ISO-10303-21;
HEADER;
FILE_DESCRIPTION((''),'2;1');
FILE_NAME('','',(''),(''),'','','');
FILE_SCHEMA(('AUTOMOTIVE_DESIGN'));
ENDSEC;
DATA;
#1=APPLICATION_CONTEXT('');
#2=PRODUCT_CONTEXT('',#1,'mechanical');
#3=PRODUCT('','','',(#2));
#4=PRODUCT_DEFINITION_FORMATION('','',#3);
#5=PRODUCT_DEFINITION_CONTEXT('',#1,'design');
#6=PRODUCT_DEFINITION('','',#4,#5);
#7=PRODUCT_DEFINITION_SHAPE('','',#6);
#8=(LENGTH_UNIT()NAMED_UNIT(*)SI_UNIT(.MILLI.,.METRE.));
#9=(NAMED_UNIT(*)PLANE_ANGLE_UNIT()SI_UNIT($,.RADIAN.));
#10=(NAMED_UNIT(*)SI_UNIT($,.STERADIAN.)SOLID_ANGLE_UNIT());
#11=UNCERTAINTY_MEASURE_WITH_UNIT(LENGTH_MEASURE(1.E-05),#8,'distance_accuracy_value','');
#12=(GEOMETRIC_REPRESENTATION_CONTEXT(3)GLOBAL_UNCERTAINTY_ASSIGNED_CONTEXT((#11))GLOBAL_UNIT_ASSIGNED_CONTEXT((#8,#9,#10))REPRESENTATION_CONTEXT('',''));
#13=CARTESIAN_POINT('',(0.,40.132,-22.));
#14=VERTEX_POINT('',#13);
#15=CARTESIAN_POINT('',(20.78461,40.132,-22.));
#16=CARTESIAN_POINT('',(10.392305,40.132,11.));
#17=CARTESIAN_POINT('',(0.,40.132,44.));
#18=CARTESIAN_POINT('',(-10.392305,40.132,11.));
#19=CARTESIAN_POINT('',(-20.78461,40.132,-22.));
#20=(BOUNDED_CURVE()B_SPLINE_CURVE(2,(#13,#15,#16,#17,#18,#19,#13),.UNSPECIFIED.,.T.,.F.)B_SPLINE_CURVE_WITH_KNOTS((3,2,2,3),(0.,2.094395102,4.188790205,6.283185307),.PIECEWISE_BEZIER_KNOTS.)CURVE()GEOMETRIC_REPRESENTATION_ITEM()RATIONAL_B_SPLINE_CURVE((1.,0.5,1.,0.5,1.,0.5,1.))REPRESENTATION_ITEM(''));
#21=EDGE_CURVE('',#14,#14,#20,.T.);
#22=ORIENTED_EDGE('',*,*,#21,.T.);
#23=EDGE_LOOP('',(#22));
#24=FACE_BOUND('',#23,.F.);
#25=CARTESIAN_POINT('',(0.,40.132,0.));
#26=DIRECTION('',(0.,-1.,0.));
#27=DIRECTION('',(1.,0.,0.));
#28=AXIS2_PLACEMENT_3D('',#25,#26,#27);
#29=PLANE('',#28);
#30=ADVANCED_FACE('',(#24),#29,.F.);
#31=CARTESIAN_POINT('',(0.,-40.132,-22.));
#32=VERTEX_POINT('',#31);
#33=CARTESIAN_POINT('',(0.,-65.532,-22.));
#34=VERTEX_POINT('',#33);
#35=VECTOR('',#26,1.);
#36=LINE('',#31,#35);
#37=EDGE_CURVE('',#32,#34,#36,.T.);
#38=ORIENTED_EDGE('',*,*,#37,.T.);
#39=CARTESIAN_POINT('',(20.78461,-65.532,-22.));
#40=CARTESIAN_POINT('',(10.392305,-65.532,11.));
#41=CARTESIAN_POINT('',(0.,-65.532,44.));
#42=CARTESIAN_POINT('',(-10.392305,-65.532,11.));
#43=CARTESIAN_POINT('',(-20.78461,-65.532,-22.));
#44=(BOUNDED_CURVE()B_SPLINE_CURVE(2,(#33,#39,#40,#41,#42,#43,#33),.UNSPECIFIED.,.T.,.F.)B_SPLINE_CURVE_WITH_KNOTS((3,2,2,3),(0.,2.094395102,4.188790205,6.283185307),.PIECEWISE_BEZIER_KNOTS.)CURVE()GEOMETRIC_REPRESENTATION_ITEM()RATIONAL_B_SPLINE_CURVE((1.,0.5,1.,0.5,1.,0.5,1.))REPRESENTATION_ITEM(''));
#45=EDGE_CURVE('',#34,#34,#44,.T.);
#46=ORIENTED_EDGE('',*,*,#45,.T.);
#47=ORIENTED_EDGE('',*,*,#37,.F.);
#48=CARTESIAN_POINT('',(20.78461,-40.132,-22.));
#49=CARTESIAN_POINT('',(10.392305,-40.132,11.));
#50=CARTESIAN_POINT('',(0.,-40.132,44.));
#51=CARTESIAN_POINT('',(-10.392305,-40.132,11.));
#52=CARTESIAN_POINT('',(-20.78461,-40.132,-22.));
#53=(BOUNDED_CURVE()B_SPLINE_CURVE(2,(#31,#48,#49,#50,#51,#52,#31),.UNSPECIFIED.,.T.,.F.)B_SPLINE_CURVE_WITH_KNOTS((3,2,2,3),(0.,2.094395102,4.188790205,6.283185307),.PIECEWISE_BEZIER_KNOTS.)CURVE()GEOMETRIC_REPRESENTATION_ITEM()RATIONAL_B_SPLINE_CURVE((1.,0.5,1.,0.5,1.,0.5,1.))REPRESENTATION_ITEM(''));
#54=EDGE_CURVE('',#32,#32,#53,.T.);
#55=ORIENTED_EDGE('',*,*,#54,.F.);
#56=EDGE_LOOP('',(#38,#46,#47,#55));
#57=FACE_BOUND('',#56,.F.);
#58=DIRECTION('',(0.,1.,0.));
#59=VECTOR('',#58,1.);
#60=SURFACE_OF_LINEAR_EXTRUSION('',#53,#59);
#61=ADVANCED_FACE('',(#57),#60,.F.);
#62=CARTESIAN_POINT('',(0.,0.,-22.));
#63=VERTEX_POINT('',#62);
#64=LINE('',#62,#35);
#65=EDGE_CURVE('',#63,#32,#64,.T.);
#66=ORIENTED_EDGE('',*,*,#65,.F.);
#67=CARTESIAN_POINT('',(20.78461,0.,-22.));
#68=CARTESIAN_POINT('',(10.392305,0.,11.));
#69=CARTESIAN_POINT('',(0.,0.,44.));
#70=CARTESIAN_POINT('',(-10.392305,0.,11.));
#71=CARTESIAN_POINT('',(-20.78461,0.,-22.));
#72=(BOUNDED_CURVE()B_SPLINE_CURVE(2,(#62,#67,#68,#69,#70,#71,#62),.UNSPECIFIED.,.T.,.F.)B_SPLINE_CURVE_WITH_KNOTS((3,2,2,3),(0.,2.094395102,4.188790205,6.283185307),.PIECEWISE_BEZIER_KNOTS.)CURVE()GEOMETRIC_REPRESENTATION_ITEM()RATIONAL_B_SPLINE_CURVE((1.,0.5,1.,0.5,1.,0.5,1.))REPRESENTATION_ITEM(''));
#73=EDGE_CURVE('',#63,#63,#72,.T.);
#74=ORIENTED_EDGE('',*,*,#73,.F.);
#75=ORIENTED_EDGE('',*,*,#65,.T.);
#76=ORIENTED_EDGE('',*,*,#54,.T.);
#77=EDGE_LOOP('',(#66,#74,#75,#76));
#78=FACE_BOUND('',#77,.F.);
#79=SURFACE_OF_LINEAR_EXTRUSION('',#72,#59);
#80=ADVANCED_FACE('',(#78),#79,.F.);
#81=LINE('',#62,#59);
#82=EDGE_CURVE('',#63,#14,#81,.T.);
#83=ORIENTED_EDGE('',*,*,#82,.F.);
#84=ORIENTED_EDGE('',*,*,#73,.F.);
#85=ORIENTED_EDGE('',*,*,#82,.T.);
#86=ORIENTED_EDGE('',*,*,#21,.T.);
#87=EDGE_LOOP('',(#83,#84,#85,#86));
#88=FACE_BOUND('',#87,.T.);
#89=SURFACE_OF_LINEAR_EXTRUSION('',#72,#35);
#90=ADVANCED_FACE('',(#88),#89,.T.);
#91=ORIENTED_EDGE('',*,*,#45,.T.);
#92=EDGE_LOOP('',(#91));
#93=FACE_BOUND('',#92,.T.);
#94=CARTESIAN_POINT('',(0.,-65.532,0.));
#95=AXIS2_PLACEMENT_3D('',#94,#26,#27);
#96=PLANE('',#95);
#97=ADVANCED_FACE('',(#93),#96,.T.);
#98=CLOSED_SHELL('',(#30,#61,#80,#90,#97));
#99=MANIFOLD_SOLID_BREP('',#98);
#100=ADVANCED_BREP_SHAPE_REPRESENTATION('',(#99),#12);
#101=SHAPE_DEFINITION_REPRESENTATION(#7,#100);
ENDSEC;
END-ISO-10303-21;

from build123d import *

# Parameters (mm, degrees)
F1_DEPTH = 40.132
F4_DEPTH = 25.4


# Not quite as in the source:
# - the program builds the solid bodies; features that only make, move or delete a surface that nothing else refers to are left out


with BuildPart() as f1:
    # F0 (on Front) → F1 (new body, symmetric)
    with BuildSketch(Plane.XZ):
        with BuildLine():
            add(Edge.make_bspline(
                [(0, -22), (20.7846096908, -22), (10.3923048454, 11), (0, 44), (-10.3923048454, 11), (-20.7846096908, -22), (0, -22)],
                knots=[0, 0, 0, 2.0943951024, 2.0943951024, 4.1887902048, 4.1887902048, 6.2831853072, 6.2831853072, 6.2831853072], degree=2, weights=[1, 0.5, 1, 0.5, 1, 0.5, 1]))
        make_face()
    extrude(amount=F1_DEPTH, both=True)

    # F4 (add): a face of the model
    f4_faces = [f1.faces().sort_by_distance(p)[0] for p in [
        (0, -40.132, 0.0533612732),
    ]]
    extrude(f4_faces, amount=F4_DEPTH)


solid = f1.part
